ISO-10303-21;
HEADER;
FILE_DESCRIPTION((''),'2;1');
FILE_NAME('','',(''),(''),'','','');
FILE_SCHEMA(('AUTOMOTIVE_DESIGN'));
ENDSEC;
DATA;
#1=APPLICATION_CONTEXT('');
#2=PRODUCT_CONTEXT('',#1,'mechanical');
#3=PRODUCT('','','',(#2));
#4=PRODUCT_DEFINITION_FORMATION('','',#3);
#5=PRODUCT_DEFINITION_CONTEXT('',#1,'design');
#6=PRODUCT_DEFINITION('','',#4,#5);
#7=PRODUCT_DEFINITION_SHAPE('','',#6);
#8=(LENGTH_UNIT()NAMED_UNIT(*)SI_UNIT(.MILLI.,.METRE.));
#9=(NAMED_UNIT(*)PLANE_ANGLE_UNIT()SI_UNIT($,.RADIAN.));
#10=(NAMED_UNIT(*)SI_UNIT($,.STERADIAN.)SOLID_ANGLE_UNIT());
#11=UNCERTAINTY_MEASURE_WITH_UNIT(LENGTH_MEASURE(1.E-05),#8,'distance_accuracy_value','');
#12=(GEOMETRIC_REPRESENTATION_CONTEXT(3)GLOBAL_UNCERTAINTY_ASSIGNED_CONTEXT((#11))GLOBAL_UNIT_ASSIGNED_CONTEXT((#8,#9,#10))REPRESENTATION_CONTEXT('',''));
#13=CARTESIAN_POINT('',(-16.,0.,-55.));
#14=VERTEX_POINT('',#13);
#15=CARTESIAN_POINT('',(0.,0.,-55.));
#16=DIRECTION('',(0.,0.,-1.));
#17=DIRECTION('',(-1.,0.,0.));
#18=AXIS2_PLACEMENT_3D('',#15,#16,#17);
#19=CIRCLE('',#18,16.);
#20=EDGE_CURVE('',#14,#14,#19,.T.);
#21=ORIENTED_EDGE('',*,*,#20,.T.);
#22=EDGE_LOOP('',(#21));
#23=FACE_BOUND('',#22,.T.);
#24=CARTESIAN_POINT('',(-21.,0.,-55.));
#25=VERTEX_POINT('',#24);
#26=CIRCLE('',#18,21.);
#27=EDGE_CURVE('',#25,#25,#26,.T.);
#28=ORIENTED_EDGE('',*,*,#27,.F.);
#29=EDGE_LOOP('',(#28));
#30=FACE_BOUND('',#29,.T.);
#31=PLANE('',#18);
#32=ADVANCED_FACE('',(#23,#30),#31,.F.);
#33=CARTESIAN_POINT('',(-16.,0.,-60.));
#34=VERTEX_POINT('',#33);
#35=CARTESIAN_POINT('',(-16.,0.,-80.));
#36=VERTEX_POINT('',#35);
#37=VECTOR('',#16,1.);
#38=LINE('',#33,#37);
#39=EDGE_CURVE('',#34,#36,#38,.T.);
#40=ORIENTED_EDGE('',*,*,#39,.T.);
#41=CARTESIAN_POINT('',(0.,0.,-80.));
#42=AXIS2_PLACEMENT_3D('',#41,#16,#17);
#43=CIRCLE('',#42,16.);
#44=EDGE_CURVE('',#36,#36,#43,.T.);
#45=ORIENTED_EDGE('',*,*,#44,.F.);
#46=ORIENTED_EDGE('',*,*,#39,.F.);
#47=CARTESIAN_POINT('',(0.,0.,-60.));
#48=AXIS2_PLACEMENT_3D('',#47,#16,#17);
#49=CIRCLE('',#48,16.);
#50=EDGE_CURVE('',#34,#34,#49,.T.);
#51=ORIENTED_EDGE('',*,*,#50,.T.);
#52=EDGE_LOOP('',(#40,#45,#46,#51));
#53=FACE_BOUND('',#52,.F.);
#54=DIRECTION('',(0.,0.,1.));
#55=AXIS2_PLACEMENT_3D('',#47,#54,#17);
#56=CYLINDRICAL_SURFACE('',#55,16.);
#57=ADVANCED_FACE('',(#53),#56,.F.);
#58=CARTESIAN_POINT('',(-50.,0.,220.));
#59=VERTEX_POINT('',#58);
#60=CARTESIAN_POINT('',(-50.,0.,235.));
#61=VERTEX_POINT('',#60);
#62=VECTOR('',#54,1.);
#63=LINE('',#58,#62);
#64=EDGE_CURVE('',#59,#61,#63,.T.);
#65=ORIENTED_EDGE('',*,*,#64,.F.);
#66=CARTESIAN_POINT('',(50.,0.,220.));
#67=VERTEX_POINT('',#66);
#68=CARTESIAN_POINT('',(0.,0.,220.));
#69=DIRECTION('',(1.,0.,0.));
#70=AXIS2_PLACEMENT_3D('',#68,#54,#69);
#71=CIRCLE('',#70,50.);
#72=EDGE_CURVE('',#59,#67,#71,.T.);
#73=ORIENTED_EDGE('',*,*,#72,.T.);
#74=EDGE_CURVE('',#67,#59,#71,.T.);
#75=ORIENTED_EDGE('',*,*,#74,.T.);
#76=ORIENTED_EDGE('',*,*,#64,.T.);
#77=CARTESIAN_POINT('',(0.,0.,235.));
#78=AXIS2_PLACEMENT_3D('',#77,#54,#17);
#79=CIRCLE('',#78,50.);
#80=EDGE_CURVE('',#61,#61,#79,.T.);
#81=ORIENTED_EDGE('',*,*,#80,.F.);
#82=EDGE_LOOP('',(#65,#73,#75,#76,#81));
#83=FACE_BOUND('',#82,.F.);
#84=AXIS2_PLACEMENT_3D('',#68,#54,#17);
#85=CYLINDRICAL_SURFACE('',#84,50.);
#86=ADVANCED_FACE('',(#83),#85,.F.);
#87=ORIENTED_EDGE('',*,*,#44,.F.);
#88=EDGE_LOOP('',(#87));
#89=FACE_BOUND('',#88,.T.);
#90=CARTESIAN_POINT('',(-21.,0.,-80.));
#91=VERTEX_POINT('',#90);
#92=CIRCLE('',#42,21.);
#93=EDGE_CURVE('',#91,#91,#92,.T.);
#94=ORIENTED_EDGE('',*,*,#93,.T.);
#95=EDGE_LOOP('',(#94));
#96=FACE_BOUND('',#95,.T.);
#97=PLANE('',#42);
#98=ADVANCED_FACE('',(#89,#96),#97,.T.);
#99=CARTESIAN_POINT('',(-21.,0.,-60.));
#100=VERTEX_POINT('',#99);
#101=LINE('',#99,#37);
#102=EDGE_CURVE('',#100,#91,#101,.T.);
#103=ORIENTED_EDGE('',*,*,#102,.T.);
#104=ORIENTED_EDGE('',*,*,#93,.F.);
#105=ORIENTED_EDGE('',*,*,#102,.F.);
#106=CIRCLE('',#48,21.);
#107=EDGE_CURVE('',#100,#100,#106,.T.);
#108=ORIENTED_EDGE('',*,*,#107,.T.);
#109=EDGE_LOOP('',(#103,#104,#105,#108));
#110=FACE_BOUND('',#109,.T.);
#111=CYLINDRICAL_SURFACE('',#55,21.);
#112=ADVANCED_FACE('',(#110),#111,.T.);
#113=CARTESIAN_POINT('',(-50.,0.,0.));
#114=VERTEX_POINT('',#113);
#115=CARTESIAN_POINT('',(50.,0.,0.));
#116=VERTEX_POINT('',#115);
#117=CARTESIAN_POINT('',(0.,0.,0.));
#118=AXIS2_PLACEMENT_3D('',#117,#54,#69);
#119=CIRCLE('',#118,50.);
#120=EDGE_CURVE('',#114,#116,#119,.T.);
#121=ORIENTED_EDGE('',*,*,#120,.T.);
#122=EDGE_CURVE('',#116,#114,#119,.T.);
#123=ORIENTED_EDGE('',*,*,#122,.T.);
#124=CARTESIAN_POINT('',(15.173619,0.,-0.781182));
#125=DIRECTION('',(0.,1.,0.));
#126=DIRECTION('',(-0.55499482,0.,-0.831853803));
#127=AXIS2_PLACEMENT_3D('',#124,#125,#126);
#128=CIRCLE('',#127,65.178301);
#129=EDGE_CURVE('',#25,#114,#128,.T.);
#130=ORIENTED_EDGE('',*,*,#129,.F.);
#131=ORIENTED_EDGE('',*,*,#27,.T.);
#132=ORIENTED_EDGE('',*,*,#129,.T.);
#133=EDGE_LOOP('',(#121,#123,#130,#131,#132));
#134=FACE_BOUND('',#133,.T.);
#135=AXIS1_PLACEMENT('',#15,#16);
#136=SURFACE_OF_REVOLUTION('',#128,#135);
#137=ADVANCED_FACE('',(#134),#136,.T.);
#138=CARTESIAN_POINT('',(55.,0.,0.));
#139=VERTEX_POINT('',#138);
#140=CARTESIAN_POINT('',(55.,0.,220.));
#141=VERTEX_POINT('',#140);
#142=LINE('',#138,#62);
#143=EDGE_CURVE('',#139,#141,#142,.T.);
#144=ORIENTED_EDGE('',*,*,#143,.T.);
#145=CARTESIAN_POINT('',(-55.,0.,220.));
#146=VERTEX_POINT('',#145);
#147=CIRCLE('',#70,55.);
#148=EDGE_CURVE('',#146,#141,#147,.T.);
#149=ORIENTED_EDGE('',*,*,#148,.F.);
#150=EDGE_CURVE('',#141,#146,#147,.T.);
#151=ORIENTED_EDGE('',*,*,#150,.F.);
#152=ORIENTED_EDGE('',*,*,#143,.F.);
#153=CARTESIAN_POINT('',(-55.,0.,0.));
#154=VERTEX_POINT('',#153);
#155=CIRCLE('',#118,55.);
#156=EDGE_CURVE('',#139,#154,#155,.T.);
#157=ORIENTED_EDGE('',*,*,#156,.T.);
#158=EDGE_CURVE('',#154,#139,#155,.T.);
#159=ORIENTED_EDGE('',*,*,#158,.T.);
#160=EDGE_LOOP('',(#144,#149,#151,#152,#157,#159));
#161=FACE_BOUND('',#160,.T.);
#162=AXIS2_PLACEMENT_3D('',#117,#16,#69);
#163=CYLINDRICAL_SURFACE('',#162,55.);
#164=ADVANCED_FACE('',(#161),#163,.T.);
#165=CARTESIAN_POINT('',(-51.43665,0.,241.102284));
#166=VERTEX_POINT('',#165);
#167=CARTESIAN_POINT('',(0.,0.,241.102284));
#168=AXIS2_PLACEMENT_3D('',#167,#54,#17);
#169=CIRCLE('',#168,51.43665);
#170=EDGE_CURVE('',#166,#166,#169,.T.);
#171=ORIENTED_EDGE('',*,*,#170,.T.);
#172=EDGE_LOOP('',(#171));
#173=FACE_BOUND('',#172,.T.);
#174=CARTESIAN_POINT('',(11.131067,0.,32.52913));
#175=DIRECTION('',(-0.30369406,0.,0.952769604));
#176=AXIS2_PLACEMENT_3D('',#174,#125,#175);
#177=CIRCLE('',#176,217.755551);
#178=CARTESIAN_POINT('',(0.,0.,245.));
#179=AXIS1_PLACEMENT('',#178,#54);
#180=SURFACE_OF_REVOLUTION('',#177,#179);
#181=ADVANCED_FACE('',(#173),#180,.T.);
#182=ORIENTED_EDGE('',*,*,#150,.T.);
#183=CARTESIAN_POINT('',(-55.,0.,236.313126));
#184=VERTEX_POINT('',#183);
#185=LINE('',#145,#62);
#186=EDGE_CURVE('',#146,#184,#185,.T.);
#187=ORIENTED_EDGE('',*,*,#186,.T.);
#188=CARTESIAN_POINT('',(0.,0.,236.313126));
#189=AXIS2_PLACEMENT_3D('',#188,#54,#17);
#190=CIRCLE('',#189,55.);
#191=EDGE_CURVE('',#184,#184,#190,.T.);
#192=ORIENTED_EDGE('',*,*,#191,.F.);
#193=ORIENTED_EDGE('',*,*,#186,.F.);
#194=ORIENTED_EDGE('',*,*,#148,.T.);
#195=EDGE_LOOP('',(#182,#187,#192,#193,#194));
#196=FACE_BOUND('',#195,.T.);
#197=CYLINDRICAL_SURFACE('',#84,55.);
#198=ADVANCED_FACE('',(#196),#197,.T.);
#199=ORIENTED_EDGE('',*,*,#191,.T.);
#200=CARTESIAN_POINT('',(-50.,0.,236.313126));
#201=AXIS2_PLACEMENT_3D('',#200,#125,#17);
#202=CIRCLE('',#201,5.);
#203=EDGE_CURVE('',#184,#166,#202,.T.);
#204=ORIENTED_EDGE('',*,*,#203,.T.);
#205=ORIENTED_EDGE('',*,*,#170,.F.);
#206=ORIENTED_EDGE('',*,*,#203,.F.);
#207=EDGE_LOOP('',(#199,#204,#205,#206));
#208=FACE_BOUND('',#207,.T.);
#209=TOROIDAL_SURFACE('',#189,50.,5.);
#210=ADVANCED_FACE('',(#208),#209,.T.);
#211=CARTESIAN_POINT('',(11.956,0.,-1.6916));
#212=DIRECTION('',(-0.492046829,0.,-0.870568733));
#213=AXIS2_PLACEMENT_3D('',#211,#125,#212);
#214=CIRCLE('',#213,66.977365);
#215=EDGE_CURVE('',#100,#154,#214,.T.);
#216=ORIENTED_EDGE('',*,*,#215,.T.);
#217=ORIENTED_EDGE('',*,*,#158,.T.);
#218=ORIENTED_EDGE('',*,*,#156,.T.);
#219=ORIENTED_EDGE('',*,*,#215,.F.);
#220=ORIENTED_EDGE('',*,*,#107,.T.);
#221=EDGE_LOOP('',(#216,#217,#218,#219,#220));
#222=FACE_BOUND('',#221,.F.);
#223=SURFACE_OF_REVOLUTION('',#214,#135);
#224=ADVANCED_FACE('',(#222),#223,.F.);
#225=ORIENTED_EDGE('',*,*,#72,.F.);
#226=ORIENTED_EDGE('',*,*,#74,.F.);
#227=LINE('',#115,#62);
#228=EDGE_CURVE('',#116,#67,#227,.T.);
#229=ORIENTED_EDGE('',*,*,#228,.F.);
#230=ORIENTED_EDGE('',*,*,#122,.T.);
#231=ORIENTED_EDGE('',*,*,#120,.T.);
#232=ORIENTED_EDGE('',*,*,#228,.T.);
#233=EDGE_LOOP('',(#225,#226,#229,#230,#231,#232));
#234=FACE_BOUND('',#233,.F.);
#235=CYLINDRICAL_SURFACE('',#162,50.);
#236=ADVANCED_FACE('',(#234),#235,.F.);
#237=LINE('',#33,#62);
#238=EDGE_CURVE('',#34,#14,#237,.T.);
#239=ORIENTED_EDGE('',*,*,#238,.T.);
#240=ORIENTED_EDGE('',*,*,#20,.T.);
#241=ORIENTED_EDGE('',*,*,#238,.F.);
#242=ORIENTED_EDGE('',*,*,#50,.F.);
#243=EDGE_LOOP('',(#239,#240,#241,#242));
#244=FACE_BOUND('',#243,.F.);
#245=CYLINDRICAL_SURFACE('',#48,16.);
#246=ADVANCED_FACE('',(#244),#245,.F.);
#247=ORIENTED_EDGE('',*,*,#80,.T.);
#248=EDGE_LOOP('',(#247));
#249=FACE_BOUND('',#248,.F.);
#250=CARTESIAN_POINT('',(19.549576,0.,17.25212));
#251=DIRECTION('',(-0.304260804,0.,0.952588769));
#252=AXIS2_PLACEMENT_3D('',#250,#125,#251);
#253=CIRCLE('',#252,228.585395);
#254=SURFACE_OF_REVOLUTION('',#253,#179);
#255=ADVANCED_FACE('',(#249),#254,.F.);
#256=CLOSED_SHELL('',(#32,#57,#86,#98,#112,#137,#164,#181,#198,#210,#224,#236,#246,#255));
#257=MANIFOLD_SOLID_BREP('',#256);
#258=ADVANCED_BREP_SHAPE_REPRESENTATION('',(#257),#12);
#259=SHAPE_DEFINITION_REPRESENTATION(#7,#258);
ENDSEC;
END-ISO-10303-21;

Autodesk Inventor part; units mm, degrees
ref_plane "YZ Plane" through (0, 0, 0) normal (1, 0, 0) x (0, 1, 0)
ref_plane "XZ Plane" through (0, 0, 0) normal (0, 1, 0) x (-1, 0, 0)
ref_plane "XY Plane" through (0, 0, 0) normal (0, 0, 1) x (1, 0, 0)
sketch "Sketch1" plane through (0, 0, 0) normal (0, 0, 1) x (1, 0, 0)
  circle A0 centre (0, 0) radius 55
  circle A1 centre (0, 0) radius 50
  dimension "d0" = 110
  dimension "d1" = 100
extrude "Extrusion1" add sketch "Sketch1" along normal blind 220
sketch "Sketch2" plane through (0, 0, 0) normal (0, 1, 0) x (-1, 0, 0)
  line L0 (55, 0) -> (-55, 0) projected
  line L1 (0, 0) -> (55, 0)
  line L2 (0, 0) -> (0, -60)
  line L3 (0, -60) -> (21, -60)
  arc A0 (21, -60) -> (55, 0) centre (-11.9561, -1.6915) ccw
  line L4 (0, 0) -> (50, 0)
  line L5 (0, -60) -> (0, -55)
  line L6 (0, -55) -> (18, -55)
  arc A1 (21, -55) -> (50, 0) centre (-15.1736, -0.7812) ccw
  line L7 (18, -55) -> (21, -55)
  dimension "d4" = 60
  dimension "d5" = 21
  dimension "d6" = 50
  dimension "d7" = 5
  dimension "d8" = 18
revolve "Revolution1" add sketch "Sketch2" angle 360 about axis through (0, 0, 0) along (0, 0, -1) contours A0 L3 L2 L6 L7 A1 L0
sketch "Sketch3" plane through (0, 0, -60) normal (0, 0, -1) x (-1, 0, 0)
  circle A0 centre (0, 0) radius 21
  circle A1 centre (0, 0) radius 16
  dimension "d10" = 32
extrude "Extrusion2" add sketch "Sketch3" along normal blind 20
sketch "Sketch4" plane through (0, 0, -60) normal (0, 0, -1) x (-1, 0, 0)
  circle A0 centre (0, 0) radius 16
extrude "Extrusion3" cut sketch "Sketch4" against normal blind 20
sketch "Sketch5" plane through (0, 0, 0) normal (0, 1, 0) x (-1, 0, 0)
  line L0 (55, 220) -> (-55, 220) projected
  line L1 (0, 220) -> (55, 220)
  line L2 (55, 0) -> (55, 220) projected
  line L3 (55, 220) -> (55, 240)
  line L4 (0, 220) -> (0, 250)
  arc A0 (55, 240) -> (0, 250) centre (-11.131, 32.5294) ccw
  line L5 (55, 220) -> (50, 220)
  line L6 (50, 220) -> (50, 235)
  line L7 (0, 220) -> (5, 220)
  line L8 (0, 250) -> (0, 245)
  arc A1 (50, 235) -> (0, 245) centre (-19.5494, 17.2528) ccw
  point P0 (0, 0)
  dimension "d15" = 20
  dimension "d16" = 30
  dimension "d17" = 5
  dimension "d18" = 15
  dimension "d19" = 5
  dimension "d20" = 5
revolve "Revolution2" add sketch "Sketch5" angle 360 about axis through (0, 0, 220) along (0, 0, 1) contours L0 L6 A1 L4 A0 L3
fillet "Fillet1" radius 5 1 edges at (55, 0, 240)
properties part number "tank"
